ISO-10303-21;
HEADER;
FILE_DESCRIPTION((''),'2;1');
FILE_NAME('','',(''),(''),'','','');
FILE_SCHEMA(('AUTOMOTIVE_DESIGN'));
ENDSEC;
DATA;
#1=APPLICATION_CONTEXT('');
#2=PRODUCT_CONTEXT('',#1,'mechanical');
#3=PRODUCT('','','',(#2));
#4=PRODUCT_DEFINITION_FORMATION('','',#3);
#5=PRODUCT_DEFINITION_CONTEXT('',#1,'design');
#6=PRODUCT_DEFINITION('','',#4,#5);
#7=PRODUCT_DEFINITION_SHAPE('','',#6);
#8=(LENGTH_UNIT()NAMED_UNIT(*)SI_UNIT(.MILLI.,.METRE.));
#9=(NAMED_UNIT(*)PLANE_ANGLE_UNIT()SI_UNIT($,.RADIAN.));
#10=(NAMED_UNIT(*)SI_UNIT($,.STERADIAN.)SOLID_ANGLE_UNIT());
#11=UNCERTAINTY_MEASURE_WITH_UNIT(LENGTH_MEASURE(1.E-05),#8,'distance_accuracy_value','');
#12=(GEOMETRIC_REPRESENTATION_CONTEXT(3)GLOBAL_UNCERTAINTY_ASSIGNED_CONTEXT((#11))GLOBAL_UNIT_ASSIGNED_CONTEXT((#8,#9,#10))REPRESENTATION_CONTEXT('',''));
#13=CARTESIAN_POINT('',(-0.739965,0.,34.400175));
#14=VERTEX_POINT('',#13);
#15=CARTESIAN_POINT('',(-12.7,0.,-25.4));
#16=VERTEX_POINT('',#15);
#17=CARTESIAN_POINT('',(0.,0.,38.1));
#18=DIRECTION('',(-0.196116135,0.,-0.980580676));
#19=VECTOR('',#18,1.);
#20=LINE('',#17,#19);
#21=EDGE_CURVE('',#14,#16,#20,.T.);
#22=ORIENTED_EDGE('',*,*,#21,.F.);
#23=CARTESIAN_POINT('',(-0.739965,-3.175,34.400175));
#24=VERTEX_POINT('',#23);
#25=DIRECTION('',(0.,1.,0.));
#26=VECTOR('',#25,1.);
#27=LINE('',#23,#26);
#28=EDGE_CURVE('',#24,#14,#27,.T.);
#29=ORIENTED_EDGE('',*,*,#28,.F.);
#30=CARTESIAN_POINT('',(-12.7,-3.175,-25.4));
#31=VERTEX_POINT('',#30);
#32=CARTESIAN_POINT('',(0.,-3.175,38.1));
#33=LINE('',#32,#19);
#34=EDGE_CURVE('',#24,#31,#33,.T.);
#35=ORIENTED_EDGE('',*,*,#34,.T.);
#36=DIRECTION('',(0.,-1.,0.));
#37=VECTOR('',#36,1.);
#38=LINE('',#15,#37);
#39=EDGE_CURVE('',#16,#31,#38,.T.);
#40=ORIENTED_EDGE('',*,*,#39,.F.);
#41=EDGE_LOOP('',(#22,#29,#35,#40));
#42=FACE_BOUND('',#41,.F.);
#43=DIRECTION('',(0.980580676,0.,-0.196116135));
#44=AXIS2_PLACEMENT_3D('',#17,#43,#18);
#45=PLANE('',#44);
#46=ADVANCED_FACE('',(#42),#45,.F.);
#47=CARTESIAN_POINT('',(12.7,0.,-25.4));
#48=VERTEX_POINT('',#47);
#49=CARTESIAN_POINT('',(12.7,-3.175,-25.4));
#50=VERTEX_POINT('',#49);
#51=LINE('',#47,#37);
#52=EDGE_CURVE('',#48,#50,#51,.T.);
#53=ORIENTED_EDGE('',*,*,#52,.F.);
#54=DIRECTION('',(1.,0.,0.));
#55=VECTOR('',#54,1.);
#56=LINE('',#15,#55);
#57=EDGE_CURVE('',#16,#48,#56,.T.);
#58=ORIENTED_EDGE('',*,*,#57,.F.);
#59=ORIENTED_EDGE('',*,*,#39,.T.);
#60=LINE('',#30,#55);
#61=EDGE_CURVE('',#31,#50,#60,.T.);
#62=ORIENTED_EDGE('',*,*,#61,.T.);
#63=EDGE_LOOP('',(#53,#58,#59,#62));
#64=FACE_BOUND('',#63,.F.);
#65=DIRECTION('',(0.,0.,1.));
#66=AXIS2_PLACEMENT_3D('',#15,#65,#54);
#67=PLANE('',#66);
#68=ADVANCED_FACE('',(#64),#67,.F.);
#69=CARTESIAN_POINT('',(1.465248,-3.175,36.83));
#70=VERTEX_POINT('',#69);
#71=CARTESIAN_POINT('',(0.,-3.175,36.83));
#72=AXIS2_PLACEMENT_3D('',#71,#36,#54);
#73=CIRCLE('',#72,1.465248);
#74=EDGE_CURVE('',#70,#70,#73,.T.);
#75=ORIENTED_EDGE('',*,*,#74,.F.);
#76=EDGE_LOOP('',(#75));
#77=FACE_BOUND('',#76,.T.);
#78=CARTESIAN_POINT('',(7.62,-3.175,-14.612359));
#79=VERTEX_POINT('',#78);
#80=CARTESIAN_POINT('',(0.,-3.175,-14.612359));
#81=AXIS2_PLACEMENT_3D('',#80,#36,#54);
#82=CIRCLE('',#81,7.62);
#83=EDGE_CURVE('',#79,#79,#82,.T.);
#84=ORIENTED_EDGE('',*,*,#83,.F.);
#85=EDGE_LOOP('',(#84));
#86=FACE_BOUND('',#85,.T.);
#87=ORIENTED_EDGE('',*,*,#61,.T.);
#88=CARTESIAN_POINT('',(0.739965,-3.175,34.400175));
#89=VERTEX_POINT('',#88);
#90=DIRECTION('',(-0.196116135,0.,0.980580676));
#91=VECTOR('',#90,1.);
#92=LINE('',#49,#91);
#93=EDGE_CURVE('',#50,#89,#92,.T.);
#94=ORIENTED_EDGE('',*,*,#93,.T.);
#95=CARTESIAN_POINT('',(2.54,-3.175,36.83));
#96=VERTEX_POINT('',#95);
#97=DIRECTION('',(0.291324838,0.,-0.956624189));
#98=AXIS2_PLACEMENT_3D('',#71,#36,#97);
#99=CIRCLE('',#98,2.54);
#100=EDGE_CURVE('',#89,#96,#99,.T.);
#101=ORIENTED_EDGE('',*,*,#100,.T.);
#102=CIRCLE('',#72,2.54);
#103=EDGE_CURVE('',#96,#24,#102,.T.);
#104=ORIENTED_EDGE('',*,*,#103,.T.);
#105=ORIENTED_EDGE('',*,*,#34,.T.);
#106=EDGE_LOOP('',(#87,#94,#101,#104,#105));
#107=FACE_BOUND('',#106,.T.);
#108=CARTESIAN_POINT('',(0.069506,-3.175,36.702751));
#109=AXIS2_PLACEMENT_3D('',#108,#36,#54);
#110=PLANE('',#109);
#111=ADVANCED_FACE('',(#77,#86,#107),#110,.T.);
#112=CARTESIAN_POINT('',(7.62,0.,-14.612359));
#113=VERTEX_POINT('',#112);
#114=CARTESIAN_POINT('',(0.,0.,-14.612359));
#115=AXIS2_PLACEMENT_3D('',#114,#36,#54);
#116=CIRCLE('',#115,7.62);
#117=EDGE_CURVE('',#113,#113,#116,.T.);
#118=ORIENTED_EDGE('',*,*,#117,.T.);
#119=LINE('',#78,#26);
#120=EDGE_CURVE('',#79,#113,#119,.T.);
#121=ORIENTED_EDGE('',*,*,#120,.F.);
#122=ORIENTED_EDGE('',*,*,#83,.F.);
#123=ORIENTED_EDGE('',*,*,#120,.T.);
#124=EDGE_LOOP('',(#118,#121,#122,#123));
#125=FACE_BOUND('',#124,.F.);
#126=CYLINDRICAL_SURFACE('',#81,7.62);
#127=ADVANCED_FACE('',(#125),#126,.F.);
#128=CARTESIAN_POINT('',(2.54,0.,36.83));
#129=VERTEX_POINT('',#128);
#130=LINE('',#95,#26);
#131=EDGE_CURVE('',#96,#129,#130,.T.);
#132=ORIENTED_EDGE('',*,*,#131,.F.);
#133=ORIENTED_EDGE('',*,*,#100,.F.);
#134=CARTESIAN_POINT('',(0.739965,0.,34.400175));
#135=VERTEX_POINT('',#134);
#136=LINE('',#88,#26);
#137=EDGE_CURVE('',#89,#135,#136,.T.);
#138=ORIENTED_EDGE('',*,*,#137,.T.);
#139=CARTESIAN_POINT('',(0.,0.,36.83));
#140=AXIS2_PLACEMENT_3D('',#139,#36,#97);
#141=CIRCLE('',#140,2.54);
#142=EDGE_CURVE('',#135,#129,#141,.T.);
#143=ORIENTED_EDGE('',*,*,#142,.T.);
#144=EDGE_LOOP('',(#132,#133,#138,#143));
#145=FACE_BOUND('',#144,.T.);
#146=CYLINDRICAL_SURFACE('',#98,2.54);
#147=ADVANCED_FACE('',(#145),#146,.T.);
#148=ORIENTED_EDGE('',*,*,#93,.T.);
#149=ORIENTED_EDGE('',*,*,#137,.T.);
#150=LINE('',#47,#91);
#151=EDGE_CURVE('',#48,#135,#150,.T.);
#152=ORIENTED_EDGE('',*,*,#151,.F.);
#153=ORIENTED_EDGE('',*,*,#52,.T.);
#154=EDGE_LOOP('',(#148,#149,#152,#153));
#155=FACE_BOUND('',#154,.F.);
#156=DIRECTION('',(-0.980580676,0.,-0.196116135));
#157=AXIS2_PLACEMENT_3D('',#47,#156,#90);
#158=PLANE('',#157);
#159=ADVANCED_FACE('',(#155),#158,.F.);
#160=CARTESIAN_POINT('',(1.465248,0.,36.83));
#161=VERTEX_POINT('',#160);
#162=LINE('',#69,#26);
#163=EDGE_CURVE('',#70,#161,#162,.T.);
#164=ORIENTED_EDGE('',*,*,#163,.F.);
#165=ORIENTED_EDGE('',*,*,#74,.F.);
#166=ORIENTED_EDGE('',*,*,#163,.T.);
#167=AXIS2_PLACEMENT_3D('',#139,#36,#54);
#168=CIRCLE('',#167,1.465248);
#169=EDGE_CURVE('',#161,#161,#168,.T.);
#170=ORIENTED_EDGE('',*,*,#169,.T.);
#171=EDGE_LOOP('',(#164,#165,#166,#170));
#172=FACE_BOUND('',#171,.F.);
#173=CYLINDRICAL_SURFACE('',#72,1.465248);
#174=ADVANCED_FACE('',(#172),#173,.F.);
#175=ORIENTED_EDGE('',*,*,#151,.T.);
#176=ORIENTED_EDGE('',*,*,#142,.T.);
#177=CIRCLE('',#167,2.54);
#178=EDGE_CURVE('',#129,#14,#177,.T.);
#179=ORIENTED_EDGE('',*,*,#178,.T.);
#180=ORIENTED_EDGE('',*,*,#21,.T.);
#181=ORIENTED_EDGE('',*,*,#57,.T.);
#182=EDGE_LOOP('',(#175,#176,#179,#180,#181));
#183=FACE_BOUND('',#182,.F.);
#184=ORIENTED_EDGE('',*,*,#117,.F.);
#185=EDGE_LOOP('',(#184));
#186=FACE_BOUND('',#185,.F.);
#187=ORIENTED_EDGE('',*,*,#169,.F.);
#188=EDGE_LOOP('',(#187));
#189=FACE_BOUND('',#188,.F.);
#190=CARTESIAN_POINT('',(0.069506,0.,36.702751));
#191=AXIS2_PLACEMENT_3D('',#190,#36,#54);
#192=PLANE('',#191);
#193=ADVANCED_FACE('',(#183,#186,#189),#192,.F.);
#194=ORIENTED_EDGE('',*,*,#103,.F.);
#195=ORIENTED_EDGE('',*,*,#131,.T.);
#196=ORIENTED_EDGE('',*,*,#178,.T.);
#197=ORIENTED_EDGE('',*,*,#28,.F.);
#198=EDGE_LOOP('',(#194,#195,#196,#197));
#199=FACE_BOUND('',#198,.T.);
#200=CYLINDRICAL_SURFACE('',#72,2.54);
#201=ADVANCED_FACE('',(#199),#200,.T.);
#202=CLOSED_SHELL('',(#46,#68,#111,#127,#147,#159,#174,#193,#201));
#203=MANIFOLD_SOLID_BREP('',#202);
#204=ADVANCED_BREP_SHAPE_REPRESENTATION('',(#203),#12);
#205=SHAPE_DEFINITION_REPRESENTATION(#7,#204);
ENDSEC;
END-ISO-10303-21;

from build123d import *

# Parameters (mm, degrees)
F1_DEPTH = 3.175
F2_R     = 7.62
F3_DEPTH = 3.176
F5_DEPTH = 3.175
F6_R     = 1.4652480926
F7_DEPTH = 3.176


with BuildPart() as f1:
    # F0 (on Front) → F1 (new body)
    with BuildSketch(Plane.XZ):
        Polygon((12.7, -25.4), (0, 38.1), (-12.7, -25.4), align=None)
    extrude(amount=F1_DEPTH)

    # F2 (on face) → F3 (cut, through all)
    with BuildSketch(Plane.XZ.offset(3.175)):
        with Locations((0, -14.6123587166)):
            Circle(F2_R)
    extrude(amount=-F3_DEPTH, mode=Mode.SUBTRACT)

    # F4 (on face) → F5 (join, through all)
    with BuildSketch(Plane.XZ.offset(3.175)):
        with BuildLine():
            ThreePointArc((0.739965088, 34.4001745601), (2.0409692947, 35.3180329573), (2.54, 36.83))
            ThreePointArc((2.54, 36.83), (-1.5119670427, 38.8709692947), (-0.739965088, 34.4001745601))
            Line((-0.739965088, 34.4001745601), (0, 38.1))
            Line((0, 38.1), (0.739965088, 34.4001745601))
        make_face()
    extrude(amount=-F5_DEPTH)

    # F6 (on face) → F7 (cut, through all)
    with BuildSketch(Plane.XZ.offset(3.175)):
        with Locations((0, 36.83)):
            Circle(F6_R)
    extrude(amount=-F7_DEPTH, mode=Mode.SUBTRACT)


solid = f1.part
